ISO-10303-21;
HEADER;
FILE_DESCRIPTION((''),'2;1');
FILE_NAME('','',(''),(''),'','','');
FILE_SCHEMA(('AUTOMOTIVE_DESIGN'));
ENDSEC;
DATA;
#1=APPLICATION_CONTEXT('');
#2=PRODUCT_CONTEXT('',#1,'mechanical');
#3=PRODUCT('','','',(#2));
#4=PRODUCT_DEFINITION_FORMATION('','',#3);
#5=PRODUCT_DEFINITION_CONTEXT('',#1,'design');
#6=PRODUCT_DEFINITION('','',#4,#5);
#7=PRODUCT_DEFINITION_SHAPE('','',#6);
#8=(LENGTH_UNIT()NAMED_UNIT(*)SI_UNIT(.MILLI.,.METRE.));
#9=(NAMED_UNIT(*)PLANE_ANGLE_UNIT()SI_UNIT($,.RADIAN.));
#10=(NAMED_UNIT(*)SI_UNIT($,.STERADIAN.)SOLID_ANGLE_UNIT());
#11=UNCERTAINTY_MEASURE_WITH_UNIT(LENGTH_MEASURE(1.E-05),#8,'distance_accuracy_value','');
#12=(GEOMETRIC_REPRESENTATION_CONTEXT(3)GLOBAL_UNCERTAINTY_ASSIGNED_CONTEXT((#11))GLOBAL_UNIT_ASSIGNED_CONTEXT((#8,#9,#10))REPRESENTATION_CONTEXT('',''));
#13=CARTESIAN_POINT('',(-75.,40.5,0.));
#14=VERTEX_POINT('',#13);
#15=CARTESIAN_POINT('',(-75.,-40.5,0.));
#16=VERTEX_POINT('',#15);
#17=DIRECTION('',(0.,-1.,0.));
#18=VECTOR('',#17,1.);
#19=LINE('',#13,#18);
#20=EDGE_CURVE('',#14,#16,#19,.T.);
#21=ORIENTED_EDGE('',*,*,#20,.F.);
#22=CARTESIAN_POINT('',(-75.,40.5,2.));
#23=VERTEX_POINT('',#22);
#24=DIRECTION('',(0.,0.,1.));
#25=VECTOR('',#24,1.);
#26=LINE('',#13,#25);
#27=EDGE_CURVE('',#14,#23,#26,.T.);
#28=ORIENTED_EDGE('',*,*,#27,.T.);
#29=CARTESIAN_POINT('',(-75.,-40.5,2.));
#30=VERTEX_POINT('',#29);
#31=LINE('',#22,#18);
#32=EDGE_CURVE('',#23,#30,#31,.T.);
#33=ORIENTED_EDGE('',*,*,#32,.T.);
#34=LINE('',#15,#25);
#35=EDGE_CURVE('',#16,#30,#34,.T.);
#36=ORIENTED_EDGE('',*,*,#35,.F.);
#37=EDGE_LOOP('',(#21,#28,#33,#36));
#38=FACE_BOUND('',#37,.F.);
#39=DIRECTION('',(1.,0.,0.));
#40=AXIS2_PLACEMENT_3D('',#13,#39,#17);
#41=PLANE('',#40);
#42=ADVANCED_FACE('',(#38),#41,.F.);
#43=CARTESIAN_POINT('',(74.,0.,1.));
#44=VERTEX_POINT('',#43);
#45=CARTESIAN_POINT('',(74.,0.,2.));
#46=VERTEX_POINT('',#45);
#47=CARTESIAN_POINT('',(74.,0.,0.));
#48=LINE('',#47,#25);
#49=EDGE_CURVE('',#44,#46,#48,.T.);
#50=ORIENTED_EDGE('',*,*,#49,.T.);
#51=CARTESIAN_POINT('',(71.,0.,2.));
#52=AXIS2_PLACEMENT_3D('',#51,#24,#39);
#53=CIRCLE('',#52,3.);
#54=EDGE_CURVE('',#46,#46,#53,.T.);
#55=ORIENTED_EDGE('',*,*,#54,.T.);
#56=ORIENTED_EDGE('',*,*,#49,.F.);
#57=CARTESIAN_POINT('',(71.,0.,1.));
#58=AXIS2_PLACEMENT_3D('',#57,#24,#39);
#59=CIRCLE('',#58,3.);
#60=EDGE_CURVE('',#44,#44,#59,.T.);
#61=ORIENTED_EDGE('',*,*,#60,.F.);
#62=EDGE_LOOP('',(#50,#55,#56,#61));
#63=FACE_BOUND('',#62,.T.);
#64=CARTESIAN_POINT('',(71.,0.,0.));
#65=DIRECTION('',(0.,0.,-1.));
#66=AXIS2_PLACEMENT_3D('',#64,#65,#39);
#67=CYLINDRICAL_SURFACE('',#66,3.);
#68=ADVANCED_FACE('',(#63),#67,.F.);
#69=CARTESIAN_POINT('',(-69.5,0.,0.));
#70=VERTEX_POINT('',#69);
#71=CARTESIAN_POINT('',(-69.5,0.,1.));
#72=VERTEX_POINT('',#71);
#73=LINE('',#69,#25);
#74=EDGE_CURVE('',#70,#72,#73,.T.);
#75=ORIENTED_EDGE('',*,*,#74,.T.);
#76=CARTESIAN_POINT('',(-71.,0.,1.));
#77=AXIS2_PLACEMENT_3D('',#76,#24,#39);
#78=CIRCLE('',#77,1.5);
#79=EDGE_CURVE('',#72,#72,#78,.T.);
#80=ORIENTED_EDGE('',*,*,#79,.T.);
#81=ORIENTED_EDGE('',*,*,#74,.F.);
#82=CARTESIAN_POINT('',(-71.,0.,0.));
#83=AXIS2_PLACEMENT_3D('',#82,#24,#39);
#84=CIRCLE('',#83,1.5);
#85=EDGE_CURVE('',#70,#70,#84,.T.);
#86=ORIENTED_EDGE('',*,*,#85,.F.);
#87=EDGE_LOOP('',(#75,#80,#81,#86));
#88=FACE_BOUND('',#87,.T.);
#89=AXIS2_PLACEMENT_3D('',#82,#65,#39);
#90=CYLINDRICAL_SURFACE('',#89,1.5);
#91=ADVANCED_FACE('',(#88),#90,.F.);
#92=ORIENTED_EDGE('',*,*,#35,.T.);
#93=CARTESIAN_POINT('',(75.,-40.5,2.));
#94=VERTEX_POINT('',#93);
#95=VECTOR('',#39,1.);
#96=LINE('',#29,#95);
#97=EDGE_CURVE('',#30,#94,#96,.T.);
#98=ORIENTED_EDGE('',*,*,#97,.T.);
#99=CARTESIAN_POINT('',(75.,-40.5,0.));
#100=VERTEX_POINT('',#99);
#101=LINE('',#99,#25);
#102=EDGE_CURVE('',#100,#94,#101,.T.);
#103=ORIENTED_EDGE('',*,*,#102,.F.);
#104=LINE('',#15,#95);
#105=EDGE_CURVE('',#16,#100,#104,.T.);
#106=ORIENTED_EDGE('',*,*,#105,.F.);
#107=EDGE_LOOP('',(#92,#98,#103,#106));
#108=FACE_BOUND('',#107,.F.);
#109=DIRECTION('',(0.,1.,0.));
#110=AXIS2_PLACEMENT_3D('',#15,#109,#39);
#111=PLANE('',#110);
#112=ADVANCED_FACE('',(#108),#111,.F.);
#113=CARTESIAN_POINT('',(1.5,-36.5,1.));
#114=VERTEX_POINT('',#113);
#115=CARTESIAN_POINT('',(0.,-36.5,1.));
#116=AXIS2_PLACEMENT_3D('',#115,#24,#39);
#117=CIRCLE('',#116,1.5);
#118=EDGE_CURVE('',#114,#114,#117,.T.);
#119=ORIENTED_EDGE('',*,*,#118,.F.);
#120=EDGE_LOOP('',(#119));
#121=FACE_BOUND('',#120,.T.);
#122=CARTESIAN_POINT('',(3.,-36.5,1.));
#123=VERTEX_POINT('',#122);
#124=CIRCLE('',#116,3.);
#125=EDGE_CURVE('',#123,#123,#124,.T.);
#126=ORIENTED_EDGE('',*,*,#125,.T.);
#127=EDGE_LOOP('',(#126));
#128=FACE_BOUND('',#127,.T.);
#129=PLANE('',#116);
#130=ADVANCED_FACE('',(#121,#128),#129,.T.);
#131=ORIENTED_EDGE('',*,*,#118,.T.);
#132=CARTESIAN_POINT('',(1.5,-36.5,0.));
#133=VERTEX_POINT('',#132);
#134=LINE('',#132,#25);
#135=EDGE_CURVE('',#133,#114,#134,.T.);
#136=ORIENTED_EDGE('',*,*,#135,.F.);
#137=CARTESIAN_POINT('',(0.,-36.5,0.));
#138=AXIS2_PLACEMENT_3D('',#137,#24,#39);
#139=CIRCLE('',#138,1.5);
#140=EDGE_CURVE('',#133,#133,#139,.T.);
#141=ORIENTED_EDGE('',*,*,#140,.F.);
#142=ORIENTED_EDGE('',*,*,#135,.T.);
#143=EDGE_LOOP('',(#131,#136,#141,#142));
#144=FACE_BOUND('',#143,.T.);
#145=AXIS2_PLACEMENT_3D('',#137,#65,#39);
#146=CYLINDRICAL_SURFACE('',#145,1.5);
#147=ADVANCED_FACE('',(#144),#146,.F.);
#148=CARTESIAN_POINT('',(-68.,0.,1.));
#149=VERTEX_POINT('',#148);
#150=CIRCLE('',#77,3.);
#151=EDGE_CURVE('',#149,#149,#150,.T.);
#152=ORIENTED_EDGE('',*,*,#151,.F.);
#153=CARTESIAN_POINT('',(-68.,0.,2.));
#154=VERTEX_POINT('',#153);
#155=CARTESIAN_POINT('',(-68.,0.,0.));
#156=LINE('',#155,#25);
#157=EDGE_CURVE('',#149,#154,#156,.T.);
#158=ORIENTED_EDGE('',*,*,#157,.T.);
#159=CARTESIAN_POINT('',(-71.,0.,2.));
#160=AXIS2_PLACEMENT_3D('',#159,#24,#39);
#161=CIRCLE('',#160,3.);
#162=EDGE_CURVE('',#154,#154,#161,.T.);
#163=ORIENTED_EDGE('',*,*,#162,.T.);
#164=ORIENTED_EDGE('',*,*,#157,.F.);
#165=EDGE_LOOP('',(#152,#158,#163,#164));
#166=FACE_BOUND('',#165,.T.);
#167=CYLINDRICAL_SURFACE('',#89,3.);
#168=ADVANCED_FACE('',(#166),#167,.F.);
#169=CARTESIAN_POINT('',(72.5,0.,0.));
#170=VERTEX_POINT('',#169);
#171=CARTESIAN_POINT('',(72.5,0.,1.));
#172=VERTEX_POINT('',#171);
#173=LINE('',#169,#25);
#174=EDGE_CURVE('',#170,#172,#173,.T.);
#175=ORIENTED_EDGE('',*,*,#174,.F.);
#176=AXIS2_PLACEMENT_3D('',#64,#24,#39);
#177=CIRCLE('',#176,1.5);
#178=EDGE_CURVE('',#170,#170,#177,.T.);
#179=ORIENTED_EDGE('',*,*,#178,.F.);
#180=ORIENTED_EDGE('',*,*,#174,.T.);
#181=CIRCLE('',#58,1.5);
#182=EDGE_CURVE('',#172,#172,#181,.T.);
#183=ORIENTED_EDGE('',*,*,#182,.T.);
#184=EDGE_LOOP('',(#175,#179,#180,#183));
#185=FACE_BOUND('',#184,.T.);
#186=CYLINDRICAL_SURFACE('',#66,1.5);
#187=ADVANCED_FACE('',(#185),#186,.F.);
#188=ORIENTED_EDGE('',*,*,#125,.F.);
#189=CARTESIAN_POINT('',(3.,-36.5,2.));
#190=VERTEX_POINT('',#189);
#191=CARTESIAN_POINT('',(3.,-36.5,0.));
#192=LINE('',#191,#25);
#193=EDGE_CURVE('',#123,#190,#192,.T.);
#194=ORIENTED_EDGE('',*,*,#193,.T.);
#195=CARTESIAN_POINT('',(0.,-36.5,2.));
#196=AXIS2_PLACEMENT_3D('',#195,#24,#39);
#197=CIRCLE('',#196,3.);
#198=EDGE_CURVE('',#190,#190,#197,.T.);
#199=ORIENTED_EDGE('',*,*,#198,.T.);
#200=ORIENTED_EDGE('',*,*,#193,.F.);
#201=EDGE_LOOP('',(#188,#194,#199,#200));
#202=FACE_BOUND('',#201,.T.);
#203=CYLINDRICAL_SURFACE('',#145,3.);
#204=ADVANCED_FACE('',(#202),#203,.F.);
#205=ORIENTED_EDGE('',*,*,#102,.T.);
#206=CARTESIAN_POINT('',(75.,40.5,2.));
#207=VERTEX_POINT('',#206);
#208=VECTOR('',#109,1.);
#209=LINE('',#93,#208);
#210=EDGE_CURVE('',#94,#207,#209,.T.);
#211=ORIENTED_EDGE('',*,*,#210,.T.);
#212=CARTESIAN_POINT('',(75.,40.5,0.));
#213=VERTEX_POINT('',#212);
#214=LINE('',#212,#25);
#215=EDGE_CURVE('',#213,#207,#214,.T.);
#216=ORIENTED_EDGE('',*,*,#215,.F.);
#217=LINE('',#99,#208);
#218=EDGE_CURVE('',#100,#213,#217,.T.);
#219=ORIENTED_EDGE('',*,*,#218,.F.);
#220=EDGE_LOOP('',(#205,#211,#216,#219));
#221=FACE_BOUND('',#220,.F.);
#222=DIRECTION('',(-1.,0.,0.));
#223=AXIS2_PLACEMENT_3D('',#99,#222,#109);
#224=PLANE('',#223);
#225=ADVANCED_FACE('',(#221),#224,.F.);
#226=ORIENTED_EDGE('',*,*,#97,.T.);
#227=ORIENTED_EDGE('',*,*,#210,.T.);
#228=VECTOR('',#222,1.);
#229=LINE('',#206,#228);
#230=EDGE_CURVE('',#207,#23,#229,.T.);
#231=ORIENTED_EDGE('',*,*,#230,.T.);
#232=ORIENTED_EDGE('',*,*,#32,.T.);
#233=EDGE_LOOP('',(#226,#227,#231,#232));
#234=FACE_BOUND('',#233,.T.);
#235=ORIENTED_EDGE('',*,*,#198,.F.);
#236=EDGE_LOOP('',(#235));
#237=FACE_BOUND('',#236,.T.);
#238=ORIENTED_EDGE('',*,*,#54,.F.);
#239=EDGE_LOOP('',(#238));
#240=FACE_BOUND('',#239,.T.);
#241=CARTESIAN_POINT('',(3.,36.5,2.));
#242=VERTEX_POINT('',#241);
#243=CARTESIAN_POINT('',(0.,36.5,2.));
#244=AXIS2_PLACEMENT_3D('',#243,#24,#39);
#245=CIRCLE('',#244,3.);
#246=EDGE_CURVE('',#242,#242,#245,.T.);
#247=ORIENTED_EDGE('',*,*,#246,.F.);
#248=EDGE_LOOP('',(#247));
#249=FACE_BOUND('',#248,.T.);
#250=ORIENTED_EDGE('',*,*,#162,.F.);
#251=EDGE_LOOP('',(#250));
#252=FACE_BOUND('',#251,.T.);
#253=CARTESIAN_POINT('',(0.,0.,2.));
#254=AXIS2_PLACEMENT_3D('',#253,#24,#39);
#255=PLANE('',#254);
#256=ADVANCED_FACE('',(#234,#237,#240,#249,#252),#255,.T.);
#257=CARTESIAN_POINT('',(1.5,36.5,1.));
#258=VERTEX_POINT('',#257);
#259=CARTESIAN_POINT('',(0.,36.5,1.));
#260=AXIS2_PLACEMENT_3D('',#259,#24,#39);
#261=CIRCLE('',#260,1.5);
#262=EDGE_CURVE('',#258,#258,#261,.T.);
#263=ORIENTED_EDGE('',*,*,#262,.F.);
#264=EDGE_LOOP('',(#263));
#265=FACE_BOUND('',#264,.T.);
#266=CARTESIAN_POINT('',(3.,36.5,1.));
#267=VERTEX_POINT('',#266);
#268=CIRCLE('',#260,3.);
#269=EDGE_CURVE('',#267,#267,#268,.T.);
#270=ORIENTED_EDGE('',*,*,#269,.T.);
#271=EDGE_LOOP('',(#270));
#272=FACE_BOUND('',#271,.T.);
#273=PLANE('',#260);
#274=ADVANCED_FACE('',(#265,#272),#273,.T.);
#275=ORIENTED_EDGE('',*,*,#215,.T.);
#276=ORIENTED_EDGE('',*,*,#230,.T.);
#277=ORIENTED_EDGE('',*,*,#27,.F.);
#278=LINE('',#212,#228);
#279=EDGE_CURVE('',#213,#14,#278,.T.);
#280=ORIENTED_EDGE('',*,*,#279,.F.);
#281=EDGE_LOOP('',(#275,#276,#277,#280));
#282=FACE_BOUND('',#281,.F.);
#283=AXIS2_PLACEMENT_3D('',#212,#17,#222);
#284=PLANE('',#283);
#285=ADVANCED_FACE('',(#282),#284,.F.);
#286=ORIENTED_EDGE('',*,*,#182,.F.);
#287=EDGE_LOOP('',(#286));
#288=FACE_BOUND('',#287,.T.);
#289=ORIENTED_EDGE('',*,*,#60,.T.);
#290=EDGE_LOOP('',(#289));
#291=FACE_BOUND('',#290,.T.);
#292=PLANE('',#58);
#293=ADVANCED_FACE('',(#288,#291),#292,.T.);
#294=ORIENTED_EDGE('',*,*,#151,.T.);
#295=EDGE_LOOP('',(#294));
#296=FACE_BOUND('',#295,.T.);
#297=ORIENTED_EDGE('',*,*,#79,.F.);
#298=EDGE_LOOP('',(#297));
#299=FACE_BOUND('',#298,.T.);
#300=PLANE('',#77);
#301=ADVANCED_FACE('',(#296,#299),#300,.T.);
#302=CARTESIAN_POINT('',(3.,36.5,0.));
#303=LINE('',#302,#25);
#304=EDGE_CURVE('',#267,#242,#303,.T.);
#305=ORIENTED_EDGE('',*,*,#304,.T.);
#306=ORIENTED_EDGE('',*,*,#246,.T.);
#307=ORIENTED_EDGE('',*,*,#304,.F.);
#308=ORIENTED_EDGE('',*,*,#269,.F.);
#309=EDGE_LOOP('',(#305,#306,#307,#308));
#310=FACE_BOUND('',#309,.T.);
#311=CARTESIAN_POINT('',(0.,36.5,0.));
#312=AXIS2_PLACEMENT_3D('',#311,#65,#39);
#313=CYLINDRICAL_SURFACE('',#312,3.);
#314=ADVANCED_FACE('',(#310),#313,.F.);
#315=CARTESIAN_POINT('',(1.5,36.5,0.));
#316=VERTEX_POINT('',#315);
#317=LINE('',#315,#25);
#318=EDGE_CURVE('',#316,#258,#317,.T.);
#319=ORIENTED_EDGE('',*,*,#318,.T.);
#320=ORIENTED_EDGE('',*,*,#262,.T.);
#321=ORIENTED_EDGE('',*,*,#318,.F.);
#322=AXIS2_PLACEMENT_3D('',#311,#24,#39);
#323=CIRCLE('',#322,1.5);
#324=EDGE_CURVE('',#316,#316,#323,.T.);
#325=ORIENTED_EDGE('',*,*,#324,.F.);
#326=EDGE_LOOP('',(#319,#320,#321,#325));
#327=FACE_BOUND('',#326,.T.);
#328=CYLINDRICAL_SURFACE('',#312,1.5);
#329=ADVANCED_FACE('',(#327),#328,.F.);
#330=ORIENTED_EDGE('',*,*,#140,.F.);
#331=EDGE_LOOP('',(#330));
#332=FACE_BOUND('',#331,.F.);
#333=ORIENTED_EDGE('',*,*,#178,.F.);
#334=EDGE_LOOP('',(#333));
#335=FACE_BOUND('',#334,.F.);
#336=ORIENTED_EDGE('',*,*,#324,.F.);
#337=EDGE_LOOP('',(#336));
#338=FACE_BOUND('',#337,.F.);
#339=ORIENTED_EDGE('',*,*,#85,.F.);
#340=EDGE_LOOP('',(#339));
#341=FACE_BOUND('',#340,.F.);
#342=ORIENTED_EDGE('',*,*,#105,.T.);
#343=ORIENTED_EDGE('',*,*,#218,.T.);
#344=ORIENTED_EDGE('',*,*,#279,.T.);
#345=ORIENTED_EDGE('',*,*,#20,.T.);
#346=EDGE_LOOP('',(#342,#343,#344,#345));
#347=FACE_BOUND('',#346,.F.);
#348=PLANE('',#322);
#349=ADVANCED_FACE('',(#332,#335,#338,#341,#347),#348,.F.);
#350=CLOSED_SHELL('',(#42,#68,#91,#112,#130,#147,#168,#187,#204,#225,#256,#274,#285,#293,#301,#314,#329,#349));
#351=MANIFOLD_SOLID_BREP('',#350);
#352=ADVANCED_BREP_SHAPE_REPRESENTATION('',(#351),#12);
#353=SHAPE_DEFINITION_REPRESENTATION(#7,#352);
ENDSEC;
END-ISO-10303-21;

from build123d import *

# Parameters (mm, degrees)
F0_W     = 8
F0_H     = 8
F0_R     = 3
F1_DEPTH = 2
F0_R_2   = 1.5
F2_DEPTH = 1


# Not quite as in the source:
# - a feature names something its author has since deleted; it is built from what else it names


with BuildPart() as f1:
    # F0 (on Top) → F1 (new body)
    with BuildSketch(Plane.XY):
        Polygon((4, -40.5), (75, -40.5), (75, -4), (67, -4), (67, 4), (75, 4), (75, 40.5), (4, 40.5), (4, 32.5), (-4, 32.5), (-4, 40.5), (-75, 40.5), (-75, 4), (-67, 4), (-67, -4), (-75, -4), (-75, -40.5), (-4, -40.5), (-4, -32.5), (4, -32.5), align=None)
        with Locations((-71, 0)):
            Rectangle(F0_W, F0_H)
        with Locations((-71, 0)):
            Circle(F0_R, mode=Mode.SUBTRACT)
        with Locations((0, 36.5)):
            Rectangle(F0_W, F0_H)
        with Locations((0, 36.5)):
            Circle(F0_R, mode=Mode.SUBTRACT)
        with Locations((71, 0)):
            Rectangle(F0_W, F0_H)
        with Locations((71, 0)):
            Circle(F0_R, mode=Mode.SUBTRACT)
        with Locations((0, -36.5)):
            Rectangle(F0_W, F0_H)
        with Locations((0, -36.5)):
            Circle(F0_R, mode=Mode.SUBTRACT)
    extrude(amount=F1_DEPTH)

    # F0 (on Top) → F2 (join)
    with BuildSketch(Plane.XY):
        with Locations((0, 36.5)):
            Circle(F0_R)
        with Locations((0, 36.5)):
            Circle(F0_R_2, mode=Mode.SUBTRACT)
        with Locations((71, 0)):
            Circle(F0_R)
        with Locations((71, 0)):
            Circle(F0_R_2, mode=Mode.SUBTRACT)
        with Locations((0, -36.5)):
            Circle(F0_R)
        with Locations((0, -36.5)):
            Circle(F0_R_2, mode=Mode.SUBTRACT)
        with Locations((-71, 0)):
            Circle(F0_R)
        with Locations((-71, 0)):
            Circle(F0_R_2, mode=Mode.SUBTRACT)
    extrude(amount=F2_DEPTH)


solid = f1.part
